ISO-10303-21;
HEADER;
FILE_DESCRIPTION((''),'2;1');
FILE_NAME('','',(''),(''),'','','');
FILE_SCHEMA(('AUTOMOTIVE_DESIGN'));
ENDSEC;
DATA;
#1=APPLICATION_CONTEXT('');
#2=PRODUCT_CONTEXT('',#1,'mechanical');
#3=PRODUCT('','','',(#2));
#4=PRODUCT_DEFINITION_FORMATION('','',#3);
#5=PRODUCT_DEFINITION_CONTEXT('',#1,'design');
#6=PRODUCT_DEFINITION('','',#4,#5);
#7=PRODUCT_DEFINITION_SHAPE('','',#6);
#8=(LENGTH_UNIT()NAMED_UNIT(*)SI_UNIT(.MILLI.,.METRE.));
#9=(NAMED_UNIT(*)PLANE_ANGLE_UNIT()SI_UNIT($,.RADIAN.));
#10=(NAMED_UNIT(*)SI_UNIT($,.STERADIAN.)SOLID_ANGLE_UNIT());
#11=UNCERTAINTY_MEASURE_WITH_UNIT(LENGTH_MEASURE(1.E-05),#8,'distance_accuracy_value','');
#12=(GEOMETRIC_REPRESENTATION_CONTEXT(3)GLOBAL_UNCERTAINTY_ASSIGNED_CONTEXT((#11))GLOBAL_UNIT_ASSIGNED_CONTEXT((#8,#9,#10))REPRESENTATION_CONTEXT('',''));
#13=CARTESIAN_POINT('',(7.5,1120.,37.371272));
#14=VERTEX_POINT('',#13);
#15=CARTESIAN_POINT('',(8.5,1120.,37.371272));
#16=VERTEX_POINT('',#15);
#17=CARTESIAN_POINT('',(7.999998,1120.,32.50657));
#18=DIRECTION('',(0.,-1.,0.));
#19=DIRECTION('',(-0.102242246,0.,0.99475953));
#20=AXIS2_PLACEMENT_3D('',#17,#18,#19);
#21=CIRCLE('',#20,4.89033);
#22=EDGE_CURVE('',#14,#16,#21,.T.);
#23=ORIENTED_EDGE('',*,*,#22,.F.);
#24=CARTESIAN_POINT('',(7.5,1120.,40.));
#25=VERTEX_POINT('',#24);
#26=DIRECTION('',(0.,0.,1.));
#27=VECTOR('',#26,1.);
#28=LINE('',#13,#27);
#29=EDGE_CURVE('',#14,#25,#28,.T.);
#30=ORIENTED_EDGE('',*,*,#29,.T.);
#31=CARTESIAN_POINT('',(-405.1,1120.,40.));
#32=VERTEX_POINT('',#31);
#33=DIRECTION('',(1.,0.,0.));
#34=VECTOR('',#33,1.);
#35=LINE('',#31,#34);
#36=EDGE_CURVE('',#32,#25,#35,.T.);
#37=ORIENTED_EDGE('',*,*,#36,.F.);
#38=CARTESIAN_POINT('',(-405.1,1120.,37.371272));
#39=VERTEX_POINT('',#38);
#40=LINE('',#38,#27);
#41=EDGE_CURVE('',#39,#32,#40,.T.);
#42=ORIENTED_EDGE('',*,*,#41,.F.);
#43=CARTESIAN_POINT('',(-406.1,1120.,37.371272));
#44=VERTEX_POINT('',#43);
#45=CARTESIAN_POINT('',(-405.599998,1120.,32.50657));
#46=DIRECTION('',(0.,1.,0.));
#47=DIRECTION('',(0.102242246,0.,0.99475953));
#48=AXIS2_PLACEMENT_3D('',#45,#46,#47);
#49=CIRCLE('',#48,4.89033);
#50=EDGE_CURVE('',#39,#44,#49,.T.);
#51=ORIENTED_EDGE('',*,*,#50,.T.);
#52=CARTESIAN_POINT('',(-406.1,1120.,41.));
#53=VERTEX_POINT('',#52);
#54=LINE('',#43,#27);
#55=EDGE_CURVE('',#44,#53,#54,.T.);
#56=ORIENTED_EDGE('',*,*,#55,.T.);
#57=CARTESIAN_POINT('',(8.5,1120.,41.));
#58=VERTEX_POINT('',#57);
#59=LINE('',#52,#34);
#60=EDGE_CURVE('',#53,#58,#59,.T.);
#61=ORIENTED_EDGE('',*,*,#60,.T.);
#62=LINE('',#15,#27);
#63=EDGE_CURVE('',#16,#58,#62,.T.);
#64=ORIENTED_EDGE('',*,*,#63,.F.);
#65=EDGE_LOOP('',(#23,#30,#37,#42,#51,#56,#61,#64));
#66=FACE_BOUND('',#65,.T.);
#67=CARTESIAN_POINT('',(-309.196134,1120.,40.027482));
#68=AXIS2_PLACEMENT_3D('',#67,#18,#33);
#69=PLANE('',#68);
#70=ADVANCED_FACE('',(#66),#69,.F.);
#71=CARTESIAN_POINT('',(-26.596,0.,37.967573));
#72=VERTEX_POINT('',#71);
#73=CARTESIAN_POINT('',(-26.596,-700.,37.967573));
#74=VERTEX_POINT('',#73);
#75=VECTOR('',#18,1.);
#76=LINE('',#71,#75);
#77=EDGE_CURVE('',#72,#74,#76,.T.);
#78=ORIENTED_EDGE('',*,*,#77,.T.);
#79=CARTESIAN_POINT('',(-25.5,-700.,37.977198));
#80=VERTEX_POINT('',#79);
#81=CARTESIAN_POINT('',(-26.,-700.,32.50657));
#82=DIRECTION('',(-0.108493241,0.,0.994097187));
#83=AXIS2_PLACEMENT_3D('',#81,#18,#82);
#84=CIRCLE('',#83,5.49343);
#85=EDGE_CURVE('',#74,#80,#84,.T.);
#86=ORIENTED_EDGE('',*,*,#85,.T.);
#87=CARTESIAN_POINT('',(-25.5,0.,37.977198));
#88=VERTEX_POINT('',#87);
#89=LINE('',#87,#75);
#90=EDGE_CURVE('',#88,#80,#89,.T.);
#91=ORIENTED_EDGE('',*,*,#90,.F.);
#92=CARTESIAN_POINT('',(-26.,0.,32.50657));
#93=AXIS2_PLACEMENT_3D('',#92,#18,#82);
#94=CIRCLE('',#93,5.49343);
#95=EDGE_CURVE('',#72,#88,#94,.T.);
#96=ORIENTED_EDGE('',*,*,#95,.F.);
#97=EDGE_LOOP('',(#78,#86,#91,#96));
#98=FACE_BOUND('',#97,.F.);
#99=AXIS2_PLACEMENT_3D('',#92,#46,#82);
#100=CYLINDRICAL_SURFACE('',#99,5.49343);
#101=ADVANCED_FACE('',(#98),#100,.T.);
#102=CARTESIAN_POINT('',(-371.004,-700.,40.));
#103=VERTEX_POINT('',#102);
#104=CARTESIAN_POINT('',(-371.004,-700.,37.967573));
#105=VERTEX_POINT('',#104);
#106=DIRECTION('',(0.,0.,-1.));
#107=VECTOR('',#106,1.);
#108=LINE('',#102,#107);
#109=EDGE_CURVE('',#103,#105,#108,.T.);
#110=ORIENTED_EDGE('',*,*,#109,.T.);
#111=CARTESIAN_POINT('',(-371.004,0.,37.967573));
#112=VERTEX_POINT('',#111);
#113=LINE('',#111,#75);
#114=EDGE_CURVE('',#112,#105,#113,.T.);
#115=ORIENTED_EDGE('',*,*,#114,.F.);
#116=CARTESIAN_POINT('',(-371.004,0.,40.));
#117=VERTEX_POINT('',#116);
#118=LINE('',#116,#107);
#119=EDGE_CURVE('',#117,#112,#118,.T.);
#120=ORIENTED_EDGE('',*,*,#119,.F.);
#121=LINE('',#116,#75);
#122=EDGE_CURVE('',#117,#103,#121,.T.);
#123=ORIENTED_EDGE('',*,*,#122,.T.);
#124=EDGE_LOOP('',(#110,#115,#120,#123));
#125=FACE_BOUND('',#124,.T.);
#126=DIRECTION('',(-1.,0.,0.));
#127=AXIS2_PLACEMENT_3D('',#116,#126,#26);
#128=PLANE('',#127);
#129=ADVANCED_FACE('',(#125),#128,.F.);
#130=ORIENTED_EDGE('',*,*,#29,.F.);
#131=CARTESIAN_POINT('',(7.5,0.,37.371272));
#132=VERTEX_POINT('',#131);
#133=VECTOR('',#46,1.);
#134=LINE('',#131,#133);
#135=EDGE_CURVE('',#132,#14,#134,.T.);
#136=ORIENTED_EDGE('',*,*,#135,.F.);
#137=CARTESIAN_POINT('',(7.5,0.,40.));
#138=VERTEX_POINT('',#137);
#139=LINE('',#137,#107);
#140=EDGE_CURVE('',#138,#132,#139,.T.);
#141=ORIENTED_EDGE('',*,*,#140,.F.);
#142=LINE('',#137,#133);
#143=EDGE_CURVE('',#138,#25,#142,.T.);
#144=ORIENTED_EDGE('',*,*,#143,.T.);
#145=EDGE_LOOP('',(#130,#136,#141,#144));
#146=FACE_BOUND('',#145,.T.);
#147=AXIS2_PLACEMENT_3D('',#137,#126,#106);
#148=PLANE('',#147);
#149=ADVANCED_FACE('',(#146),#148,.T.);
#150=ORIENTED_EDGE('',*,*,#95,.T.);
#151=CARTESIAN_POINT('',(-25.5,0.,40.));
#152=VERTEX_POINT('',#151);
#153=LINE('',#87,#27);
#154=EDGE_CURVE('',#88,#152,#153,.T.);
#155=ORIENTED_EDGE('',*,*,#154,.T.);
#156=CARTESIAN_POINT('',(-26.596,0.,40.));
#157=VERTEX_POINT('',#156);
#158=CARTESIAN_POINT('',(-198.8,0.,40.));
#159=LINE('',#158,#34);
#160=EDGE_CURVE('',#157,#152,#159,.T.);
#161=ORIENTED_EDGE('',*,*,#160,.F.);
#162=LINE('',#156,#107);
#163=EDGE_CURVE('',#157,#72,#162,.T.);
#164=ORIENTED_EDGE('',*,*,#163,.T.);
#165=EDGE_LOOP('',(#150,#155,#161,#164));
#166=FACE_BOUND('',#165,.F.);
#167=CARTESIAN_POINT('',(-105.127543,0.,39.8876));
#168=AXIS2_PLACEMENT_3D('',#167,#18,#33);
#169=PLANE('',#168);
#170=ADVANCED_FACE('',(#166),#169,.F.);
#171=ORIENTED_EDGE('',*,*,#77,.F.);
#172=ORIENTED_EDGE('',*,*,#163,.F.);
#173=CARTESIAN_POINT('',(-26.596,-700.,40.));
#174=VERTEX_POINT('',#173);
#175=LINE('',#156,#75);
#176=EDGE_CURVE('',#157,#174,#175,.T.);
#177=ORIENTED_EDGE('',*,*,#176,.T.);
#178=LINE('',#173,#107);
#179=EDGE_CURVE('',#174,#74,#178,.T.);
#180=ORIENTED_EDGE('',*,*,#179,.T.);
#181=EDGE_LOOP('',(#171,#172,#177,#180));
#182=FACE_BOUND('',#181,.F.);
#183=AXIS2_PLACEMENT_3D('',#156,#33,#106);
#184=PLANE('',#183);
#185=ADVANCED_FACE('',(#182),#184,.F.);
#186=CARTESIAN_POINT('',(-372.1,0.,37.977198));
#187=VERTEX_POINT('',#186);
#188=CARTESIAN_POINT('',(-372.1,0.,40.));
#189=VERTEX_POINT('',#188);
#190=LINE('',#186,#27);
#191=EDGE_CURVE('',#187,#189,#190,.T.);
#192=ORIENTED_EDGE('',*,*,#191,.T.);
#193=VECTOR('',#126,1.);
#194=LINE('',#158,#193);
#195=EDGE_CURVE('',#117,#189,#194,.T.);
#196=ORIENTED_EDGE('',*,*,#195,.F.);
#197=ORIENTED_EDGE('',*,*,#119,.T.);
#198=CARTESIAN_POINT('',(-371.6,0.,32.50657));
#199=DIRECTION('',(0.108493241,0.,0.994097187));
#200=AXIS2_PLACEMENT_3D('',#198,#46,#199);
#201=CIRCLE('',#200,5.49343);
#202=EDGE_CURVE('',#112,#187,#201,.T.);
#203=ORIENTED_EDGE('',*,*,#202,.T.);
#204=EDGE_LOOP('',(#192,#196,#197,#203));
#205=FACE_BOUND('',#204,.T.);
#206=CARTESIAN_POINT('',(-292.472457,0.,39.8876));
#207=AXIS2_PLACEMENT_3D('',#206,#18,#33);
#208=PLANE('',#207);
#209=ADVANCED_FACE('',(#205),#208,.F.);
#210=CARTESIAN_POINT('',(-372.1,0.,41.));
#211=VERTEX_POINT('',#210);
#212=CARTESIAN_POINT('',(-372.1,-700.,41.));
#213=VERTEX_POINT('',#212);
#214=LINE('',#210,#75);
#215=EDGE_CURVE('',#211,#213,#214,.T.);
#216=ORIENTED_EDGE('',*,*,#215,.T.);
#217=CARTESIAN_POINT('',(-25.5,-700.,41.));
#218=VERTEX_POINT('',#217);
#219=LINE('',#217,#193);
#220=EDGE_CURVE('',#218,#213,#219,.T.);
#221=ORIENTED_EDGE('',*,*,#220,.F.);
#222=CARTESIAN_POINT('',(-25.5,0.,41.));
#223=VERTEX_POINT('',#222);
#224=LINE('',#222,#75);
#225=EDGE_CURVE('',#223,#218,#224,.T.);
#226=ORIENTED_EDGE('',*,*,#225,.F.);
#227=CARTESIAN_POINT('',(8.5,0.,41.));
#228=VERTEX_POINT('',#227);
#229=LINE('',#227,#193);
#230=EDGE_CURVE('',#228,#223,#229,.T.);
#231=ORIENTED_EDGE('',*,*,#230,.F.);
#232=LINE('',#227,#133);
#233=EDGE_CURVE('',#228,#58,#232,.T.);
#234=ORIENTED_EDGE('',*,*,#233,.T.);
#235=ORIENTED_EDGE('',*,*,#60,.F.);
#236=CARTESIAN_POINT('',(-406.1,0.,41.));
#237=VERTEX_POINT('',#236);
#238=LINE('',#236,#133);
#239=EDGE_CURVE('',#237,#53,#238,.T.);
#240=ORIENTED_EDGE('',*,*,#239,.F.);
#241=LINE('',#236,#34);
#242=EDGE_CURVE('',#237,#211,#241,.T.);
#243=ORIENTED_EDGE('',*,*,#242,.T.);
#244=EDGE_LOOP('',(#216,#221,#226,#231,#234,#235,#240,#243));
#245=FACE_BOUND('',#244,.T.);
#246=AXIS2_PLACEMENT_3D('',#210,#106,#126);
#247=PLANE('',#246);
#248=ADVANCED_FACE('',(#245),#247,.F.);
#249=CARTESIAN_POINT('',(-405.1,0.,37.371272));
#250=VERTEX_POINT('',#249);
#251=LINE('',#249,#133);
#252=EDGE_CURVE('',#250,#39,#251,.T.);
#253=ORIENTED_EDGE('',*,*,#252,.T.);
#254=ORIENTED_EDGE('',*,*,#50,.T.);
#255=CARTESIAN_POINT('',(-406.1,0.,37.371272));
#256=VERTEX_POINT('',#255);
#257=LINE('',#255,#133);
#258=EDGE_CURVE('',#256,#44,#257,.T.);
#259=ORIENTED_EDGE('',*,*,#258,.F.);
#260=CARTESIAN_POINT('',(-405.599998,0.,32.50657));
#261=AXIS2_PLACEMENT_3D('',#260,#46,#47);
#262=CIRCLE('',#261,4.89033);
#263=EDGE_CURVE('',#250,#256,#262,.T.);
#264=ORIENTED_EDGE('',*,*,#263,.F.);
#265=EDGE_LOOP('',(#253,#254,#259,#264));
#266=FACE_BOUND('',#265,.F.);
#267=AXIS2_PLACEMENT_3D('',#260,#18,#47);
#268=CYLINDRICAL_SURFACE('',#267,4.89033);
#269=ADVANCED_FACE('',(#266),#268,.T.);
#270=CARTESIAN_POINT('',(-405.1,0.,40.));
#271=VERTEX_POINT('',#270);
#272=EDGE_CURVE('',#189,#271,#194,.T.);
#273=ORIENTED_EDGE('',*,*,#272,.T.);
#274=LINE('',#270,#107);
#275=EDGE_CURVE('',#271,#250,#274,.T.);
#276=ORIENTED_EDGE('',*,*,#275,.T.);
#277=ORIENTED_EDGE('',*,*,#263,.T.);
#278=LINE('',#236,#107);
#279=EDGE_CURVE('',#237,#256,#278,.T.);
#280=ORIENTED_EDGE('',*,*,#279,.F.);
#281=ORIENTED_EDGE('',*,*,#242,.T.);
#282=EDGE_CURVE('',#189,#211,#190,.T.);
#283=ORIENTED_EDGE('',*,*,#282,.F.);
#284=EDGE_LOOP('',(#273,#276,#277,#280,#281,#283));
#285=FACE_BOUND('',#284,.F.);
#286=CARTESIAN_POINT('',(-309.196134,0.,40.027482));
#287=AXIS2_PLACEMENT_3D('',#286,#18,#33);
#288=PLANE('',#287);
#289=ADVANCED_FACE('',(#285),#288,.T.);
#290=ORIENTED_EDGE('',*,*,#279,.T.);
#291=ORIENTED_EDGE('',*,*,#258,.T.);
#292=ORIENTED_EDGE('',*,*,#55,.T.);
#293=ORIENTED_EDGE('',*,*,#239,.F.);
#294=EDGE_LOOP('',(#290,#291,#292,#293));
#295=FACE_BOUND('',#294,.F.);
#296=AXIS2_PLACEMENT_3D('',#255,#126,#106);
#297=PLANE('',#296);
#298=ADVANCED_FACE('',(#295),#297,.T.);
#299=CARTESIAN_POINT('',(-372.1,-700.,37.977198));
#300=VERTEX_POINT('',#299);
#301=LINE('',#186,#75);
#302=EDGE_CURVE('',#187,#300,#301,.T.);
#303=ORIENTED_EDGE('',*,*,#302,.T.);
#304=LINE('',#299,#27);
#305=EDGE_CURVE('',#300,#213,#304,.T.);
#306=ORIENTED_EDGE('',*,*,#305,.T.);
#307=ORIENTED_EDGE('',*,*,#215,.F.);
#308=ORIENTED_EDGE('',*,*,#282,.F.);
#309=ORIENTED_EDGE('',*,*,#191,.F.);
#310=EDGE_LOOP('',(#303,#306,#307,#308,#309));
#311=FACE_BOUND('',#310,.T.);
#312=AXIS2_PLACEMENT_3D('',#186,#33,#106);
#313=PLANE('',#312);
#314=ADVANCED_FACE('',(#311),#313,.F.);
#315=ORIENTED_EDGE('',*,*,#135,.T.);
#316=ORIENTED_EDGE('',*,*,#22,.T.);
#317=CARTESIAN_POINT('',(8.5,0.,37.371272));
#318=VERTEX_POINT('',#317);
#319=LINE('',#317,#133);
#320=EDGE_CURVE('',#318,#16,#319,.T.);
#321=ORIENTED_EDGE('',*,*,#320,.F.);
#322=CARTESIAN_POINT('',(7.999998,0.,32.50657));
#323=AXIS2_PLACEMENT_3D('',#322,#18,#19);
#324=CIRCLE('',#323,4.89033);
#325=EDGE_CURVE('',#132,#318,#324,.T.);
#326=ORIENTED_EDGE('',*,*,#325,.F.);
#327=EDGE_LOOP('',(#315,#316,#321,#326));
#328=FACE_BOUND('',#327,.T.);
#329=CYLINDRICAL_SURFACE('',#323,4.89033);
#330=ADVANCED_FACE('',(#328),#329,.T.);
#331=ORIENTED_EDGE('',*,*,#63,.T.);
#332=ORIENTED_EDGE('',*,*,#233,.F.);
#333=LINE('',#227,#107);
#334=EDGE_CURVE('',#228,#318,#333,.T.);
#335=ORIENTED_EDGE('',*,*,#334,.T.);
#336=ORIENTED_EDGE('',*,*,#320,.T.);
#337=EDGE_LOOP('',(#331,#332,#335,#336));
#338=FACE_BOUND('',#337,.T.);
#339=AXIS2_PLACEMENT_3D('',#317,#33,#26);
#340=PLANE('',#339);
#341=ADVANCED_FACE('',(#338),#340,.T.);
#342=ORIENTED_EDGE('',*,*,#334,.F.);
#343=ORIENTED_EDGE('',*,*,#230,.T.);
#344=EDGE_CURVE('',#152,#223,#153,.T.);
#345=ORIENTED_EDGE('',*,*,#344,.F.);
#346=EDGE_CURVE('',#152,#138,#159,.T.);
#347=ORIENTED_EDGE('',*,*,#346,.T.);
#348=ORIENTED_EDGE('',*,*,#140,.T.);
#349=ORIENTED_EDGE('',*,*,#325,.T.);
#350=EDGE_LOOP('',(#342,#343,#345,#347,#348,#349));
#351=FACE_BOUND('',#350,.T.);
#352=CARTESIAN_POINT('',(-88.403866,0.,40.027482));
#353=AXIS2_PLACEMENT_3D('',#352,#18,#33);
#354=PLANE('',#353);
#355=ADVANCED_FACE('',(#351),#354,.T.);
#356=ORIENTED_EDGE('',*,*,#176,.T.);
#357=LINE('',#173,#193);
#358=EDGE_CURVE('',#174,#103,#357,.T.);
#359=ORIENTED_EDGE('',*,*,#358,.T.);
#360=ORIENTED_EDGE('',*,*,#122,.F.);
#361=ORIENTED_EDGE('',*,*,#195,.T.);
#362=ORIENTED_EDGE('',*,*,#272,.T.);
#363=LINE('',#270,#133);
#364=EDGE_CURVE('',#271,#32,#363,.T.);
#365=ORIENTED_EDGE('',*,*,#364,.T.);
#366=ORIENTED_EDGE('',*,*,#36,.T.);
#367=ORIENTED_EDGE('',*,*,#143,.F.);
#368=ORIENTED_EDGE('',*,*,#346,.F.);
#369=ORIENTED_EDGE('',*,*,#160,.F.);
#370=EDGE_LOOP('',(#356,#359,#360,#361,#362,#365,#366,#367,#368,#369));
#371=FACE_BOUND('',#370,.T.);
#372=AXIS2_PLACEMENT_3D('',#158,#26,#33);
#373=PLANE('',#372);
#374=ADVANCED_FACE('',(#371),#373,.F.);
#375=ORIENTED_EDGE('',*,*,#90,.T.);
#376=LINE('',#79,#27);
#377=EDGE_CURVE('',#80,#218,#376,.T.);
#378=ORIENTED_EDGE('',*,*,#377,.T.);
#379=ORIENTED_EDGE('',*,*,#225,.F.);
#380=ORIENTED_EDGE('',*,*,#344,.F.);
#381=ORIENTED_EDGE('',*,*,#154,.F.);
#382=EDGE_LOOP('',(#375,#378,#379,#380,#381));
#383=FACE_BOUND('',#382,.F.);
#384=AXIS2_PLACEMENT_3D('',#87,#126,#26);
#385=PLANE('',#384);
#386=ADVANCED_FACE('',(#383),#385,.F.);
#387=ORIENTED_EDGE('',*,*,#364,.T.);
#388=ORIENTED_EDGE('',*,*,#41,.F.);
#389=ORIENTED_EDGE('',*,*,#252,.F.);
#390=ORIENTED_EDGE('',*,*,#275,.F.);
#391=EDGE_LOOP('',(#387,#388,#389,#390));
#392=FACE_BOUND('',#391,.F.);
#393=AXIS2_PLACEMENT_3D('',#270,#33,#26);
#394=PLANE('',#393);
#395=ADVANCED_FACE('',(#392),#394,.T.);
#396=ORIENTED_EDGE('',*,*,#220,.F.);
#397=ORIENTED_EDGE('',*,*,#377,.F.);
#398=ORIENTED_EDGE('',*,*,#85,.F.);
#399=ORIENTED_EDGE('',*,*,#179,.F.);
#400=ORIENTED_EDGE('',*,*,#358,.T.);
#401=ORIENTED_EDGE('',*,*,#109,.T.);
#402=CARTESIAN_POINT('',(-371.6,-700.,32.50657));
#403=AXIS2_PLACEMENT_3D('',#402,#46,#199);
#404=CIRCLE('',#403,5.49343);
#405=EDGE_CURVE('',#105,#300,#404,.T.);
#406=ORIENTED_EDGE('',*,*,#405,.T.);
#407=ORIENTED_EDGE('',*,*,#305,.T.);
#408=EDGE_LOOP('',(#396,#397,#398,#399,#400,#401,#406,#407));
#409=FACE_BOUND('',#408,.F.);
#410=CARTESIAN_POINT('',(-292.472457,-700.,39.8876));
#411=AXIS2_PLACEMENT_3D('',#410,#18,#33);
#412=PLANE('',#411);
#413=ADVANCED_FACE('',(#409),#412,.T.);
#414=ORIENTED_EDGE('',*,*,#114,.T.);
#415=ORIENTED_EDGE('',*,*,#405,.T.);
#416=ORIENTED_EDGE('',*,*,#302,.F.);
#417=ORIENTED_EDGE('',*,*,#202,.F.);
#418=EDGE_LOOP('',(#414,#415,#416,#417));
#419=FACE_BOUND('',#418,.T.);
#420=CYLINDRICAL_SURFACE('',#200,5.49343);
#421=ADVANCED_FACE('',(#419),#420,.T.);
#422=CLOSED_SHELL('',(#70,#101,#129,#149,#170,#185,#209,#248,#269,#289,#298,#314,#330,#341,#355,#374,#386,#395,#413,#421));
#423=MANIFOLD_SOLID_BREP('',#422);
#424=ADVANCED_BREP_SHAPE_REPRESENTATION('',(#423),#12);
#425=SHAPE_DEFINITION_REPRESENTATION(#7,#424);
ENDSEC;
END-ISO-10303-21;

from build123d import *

# Parameters (mm, degrees)
F2_DEPTH  = 1910
F7_DEPTH  = 1120
F9_DEPTH  = 2000
F11_DEPTH = 700


# Not quite as in the source:
# - ends of sketch curves that miss each other by under 0.0002 mm in the source are joined


with BuildPart() as f2:
    # F1 (on Front) → F2 (new body)
    with BuildSketch(Plane.XZ):
        with BuildLine():
            Line((7.5, 37.974085065), (7.5, 40))
            Line((7.5, 40), (-15, 40))
            Line((-15, 40), (-15, 37))
            Line((-15, 37), (-15, 31))
            Line((-15, 31), (-15, 29))
            Line((-15, 29), (-15, 26))
            Line((-15, 26), (-15, 24))
            Line((-15, 24), (-13, 24))
            Line((-13, 24), (-11, 24))
            Line((-11, 24), (-11, 26))
            Line((-11, 26), (-9, 26))
            Line((-9, 26), (-9, 20))
            Line((-9, 20), (-11, 20))
            Line((-11, 20), (-11, 22))
            Line((-11, 22), (-15, 22))
            Line((-15, 22), (-15, 18))
            Line((-15, 18), (-15, 7.7))
            Line((-15, 7.7), (-13, 7.7))
            Line((-13, 7.7), (-13, 11.4920835048))
            Line((-13, 11.4920835048), (-7, 11.4920835048))
            Line((-7, 11.4920835048), (-7, 3.7))
            Line((-7, 3.7), (-11, 3.7))
            Line((-11, 3.7), (-11, 5.7))
            Line((-11, 5.7), (-15, 5.7))
            Line((-15, 5.7), (-15, 3))
            Line((-15, 3), (-15, 0))
            Line((-15, 0), (-13, 0))
            Line((-13, 0), (-12, 0))
            Line((-12, 0), (-5, 0))
            Line((-5, 0), (-5, 13.4920835048))
            Line((-5, 13.4920835048), (-7, 13.4920835048))
            Line((-7, 13.4920835048), (-9.1588944197, 13.4920835048))
            Line((-9.1588944197, 13.4920835048), (-9.1588944197, 15.4920835048))
            Line((-9.1588944197, 15.4920835048), (1.5, 20))
            Line((1.5, 20), (10.8411055803, 15.4920835048))
            Line((10.8411055803, 15.4920835048), (10.8411055803, 13.4920835048))
            Line((10.8411055803, 13.4920835048), (8, 13.4920835048))
            Line((8, 13.4920835048), (8, 0))
            Line((8, 0), (17, 0))
            Line((17, 0), (17, 40))
            Line((17, 40), (8.5, 40))
            Line((8.5, 40), (8.5, 37.974085065))
            ThreePointArc((8.5, 37.974085065), (11.5604089792, 36.6859489396), (13.3185590744, 33.8691589154))
            Line((13.3185590744, 33.8691589154), (13.4318527537, 31.7073867348))
            ThreePointArc((13.4318527537, 31.7073867348), (4.0126863822, 28.7323088758), (7.5, 37.974085065))
        make_face()
        Polygon((-8.3634709733, 18), (-11.1588944197, 16.817744602), (-11.1588944197, 15.4920835048), (-11.1588944197, 13.4920835048), (-13, 13.4920835048), (-13, 18), align=None, mode=Mode.SUBTRACT)
        with BuildLine():
            Line((-13, 34), (-13, 37.9999987781))
            Line((-13, 37.9999987781), (2.9081163149, 37.9999987781))
            ThreePointArc((2.9081163149, 37.9999987781), (3.810445381, 26.2974906682), (15, 29.8410427327))
            Line((15, 29.8410427327), (15, 2))
            Line((15, 2), (10, 2))
            Line((10, 2), (10, 12))
            Line((10, 12), (12.8411055803, 12))
            Line((12.8411055803, 12), (12.8411055803, 16.7476188273))
            Line((12.8411055803, 16.7476188273), (1.5543358685, 22.194491783))
            Line((1.5543358685, 22.194491783), (-7, 18.5766464184))
            Line((-7, 18.5766464184), (-7, 28))
            Line((-7, 28), (-13, 28))
            Line((-13, 28), (-13, 34))
        make_face(mode=Mode.SUBTRACT)
        with BuildLine():
            Line((13.0918836851, 37.9999987781), (13.1020709306, 37.9999987781))
            Line((13.1020709306, 37.9999987781), (13.1025921338, 37.9900536295))
            ThreePointArc((13.1025921338, 37.9900536295), (13.0972403349, 37.9950288154), (13.0918836851, 37.9999987781))
        make_face(mode=Mode.SUBTRACT)
    extrude(amount=-F2_DEPTH)

    # F6 (on Front) → F7 (join)
    with BuildSketch(Plane.XZ):
        with BuildLine():
            Line((8.5, 37.3712719703), (8.5, 40))
            Line((8.5, 40), (8.5, 41))
            Line((8.5, 41), (-198.8, 41))
            Line((-198.8, 41), (-198.8, 40))
            Line((-198.8, 40), (-25.5, 40))
            Line((-25.5, 40), (-15, 40))
            Line((-15, 40), (7.5, 40))
            Line((7.5, 40), (7.5, 37.3712723193))
            ThreePointArc((7.5, 37.3712723193), (7.9999999822, 27.6162403216), (8.5, 37.3712719703))
        make_face()
    extrude(amount=-F7_DEPTH)

    # F8 (on face) → F9 (cut)
    with BuildSketch(Plane.XZ):
        with BuildLine():
            Line((-15, 3), (-15, 0))
            Line((-15, 0), (-13, 0))
            Line((-13, 0), (-12, 0))
            Line((-12, 0), (-5, 0))
            Line((-5, 0), (-5, 13.4920835048))
            Line((-5, 13.4920835048), (-7, 13.4920835048))
            Line((-7, 13.4920835048), (-9.1588944197, 13.4920835048))
            Line((-9.1588944197, 13.4920835048), (-9.1588944197, 15.4920835048))
            Line((-9.1588944197, 15.4920835048), (1.5, 20))
            Line((1.5, 20), (10.8411055803, 15.4920835048))
            Line((10.8411055803, 15.4920835048), (10.8411055803, 13.4920835048))
            Line((10.8411055803, 13.4920835048), (8, 13.4920835048))
            Line((8, 13.4920835048), (8, 0))
            Line((8, 0), (17, 0))
            Line((17, 0), (17, 40))
            Line((17, 40), (8.5, 40))
            Line((8.5, 40), (8.5, 37.974085065))
            ThreePointArc((8.5, 37.974085065), (11.5604089792, 36.6859489396), (13.3185590744, 33.8691589154))
            Line((13.3185590744, 33.8691589154), (13.4318527537, 31.7073867348))
            ThreePointArc((13.4318527537, 31.7073867348), (4.0126863822, 28.7323088758), (7.5, 37.974085065))
            Line((7.5, 37.974085065), (7.5, 40))
            Line((7.5, 40), (-15, 40))
            Line((-15, 40), (-15, 31))
            Line((-15, 31), (-15, 29))
            Line((-15, 29), (-15, 24))
            Line((-15, 24), (-13, 24))
            Line((-13, 24), (-11, 24))
            Line((-11, 24), (-11, 26))
            Line((-11, 26), (-9, 26))
            Line((-9, 26), (-9, 20))
            Line((-9, 20), (-11, 20))
            Line((-11, 20), (-11, 22))
            Line((-11, 22), (-15, 22))
            Line((-15, 22), (-15, 18))
            Line((-15, 18), (-15, 7.7))
            Line((-15, 7.7), (-13, 7.7))
            Line((-13, 7.7), (-13, 11.4920835048))
            Line((-13, 11.4920835048), (-7, 11.4920835048))
            Line((-7, 11.4920835048), (-7, 3.7))
            Line((-7, 3.7), (-11, 3.7))
            Line((-11, 3.7), (-11, 5.7))
            Line((-11, 5.7), (-15, 5.7))
            Line((-15, 5.7), (-15, 3))
        make_face()
        Polygon((-13, 18), (-8.3634709733, 18), (-11.1588944197, 16.817744602), (-11.1588944197, 15.4920835048), (-11.1588944197, 13.4920835048), (-13, 13.4920835048), align=None, mode=Mode.SUBTRACT)
        with BuildLine():
            Line((12.8411055803, 12), (12.8411055803, 16.7476188273))
            Line((12.8411055803, 16.7476188273), (1.5543358685, 22.194491783))
            Line((1.5543358685, 22.194491783), (-7, 18.5766464184))
            Line((-7, 18.5766464184), (-7, 28))
            Line((-7, 28), (-13, 28))
            Line((-13, 28), (-13, 34))
            Line((-13, 34), (-13, 37.9999987781))
            Line((-13, 37.9999987781), (2.9081163149, 37.9999987781))
            ThreePointArc((2.9081163149, 37.9999987781), (3.810445381, 26.2974906682), (15, 29.8410427327))
            Line((15, 29.8410427327), (15, 2))
            Line((15, 2), (10, 2))
            Line((10, 2), (10, 12))
            Line((10, 12), (12.8411055803, 12))
        make_face(mode=Mode.SUBTRACT)
    extrude(amount=-F9_DEPTH, mode=Mode.SUBTRACT)

    # F10 (on face) → F11 (join)
    with BuildSketch(Plane.XZ):
        with BuildLine():
            Line((-49.096, 40), (-26.596, 40))
            Line((-26.596, 40), (-26.596, 37.9675733099))
            ThreePointArc((-26.596, 37.9675733099), (-25.951759356, 27.0133522571), (-25.5, 37.9771982231))
            Line((-25.5, 37.9771982231), (-25.5, 41))
            Line((-25.5, 41), (-198.8, 41))
            Line((-198.8, 41), (-198.8, 40))
            Line((-198.8, 40), (-49.096, 40))
        make_face()
    extrude(amount=F11_DEPTH)

    # F12: F2 across face


with BuildPart() as f2_1:
    add(f2.part)
    add(f2.part.mirror(Plane(origin=(-198.8, 210, 40.5), x_dir=(0, -1, 0), z_dir=(-1, 0, 0))))


solid = f2_1.part
